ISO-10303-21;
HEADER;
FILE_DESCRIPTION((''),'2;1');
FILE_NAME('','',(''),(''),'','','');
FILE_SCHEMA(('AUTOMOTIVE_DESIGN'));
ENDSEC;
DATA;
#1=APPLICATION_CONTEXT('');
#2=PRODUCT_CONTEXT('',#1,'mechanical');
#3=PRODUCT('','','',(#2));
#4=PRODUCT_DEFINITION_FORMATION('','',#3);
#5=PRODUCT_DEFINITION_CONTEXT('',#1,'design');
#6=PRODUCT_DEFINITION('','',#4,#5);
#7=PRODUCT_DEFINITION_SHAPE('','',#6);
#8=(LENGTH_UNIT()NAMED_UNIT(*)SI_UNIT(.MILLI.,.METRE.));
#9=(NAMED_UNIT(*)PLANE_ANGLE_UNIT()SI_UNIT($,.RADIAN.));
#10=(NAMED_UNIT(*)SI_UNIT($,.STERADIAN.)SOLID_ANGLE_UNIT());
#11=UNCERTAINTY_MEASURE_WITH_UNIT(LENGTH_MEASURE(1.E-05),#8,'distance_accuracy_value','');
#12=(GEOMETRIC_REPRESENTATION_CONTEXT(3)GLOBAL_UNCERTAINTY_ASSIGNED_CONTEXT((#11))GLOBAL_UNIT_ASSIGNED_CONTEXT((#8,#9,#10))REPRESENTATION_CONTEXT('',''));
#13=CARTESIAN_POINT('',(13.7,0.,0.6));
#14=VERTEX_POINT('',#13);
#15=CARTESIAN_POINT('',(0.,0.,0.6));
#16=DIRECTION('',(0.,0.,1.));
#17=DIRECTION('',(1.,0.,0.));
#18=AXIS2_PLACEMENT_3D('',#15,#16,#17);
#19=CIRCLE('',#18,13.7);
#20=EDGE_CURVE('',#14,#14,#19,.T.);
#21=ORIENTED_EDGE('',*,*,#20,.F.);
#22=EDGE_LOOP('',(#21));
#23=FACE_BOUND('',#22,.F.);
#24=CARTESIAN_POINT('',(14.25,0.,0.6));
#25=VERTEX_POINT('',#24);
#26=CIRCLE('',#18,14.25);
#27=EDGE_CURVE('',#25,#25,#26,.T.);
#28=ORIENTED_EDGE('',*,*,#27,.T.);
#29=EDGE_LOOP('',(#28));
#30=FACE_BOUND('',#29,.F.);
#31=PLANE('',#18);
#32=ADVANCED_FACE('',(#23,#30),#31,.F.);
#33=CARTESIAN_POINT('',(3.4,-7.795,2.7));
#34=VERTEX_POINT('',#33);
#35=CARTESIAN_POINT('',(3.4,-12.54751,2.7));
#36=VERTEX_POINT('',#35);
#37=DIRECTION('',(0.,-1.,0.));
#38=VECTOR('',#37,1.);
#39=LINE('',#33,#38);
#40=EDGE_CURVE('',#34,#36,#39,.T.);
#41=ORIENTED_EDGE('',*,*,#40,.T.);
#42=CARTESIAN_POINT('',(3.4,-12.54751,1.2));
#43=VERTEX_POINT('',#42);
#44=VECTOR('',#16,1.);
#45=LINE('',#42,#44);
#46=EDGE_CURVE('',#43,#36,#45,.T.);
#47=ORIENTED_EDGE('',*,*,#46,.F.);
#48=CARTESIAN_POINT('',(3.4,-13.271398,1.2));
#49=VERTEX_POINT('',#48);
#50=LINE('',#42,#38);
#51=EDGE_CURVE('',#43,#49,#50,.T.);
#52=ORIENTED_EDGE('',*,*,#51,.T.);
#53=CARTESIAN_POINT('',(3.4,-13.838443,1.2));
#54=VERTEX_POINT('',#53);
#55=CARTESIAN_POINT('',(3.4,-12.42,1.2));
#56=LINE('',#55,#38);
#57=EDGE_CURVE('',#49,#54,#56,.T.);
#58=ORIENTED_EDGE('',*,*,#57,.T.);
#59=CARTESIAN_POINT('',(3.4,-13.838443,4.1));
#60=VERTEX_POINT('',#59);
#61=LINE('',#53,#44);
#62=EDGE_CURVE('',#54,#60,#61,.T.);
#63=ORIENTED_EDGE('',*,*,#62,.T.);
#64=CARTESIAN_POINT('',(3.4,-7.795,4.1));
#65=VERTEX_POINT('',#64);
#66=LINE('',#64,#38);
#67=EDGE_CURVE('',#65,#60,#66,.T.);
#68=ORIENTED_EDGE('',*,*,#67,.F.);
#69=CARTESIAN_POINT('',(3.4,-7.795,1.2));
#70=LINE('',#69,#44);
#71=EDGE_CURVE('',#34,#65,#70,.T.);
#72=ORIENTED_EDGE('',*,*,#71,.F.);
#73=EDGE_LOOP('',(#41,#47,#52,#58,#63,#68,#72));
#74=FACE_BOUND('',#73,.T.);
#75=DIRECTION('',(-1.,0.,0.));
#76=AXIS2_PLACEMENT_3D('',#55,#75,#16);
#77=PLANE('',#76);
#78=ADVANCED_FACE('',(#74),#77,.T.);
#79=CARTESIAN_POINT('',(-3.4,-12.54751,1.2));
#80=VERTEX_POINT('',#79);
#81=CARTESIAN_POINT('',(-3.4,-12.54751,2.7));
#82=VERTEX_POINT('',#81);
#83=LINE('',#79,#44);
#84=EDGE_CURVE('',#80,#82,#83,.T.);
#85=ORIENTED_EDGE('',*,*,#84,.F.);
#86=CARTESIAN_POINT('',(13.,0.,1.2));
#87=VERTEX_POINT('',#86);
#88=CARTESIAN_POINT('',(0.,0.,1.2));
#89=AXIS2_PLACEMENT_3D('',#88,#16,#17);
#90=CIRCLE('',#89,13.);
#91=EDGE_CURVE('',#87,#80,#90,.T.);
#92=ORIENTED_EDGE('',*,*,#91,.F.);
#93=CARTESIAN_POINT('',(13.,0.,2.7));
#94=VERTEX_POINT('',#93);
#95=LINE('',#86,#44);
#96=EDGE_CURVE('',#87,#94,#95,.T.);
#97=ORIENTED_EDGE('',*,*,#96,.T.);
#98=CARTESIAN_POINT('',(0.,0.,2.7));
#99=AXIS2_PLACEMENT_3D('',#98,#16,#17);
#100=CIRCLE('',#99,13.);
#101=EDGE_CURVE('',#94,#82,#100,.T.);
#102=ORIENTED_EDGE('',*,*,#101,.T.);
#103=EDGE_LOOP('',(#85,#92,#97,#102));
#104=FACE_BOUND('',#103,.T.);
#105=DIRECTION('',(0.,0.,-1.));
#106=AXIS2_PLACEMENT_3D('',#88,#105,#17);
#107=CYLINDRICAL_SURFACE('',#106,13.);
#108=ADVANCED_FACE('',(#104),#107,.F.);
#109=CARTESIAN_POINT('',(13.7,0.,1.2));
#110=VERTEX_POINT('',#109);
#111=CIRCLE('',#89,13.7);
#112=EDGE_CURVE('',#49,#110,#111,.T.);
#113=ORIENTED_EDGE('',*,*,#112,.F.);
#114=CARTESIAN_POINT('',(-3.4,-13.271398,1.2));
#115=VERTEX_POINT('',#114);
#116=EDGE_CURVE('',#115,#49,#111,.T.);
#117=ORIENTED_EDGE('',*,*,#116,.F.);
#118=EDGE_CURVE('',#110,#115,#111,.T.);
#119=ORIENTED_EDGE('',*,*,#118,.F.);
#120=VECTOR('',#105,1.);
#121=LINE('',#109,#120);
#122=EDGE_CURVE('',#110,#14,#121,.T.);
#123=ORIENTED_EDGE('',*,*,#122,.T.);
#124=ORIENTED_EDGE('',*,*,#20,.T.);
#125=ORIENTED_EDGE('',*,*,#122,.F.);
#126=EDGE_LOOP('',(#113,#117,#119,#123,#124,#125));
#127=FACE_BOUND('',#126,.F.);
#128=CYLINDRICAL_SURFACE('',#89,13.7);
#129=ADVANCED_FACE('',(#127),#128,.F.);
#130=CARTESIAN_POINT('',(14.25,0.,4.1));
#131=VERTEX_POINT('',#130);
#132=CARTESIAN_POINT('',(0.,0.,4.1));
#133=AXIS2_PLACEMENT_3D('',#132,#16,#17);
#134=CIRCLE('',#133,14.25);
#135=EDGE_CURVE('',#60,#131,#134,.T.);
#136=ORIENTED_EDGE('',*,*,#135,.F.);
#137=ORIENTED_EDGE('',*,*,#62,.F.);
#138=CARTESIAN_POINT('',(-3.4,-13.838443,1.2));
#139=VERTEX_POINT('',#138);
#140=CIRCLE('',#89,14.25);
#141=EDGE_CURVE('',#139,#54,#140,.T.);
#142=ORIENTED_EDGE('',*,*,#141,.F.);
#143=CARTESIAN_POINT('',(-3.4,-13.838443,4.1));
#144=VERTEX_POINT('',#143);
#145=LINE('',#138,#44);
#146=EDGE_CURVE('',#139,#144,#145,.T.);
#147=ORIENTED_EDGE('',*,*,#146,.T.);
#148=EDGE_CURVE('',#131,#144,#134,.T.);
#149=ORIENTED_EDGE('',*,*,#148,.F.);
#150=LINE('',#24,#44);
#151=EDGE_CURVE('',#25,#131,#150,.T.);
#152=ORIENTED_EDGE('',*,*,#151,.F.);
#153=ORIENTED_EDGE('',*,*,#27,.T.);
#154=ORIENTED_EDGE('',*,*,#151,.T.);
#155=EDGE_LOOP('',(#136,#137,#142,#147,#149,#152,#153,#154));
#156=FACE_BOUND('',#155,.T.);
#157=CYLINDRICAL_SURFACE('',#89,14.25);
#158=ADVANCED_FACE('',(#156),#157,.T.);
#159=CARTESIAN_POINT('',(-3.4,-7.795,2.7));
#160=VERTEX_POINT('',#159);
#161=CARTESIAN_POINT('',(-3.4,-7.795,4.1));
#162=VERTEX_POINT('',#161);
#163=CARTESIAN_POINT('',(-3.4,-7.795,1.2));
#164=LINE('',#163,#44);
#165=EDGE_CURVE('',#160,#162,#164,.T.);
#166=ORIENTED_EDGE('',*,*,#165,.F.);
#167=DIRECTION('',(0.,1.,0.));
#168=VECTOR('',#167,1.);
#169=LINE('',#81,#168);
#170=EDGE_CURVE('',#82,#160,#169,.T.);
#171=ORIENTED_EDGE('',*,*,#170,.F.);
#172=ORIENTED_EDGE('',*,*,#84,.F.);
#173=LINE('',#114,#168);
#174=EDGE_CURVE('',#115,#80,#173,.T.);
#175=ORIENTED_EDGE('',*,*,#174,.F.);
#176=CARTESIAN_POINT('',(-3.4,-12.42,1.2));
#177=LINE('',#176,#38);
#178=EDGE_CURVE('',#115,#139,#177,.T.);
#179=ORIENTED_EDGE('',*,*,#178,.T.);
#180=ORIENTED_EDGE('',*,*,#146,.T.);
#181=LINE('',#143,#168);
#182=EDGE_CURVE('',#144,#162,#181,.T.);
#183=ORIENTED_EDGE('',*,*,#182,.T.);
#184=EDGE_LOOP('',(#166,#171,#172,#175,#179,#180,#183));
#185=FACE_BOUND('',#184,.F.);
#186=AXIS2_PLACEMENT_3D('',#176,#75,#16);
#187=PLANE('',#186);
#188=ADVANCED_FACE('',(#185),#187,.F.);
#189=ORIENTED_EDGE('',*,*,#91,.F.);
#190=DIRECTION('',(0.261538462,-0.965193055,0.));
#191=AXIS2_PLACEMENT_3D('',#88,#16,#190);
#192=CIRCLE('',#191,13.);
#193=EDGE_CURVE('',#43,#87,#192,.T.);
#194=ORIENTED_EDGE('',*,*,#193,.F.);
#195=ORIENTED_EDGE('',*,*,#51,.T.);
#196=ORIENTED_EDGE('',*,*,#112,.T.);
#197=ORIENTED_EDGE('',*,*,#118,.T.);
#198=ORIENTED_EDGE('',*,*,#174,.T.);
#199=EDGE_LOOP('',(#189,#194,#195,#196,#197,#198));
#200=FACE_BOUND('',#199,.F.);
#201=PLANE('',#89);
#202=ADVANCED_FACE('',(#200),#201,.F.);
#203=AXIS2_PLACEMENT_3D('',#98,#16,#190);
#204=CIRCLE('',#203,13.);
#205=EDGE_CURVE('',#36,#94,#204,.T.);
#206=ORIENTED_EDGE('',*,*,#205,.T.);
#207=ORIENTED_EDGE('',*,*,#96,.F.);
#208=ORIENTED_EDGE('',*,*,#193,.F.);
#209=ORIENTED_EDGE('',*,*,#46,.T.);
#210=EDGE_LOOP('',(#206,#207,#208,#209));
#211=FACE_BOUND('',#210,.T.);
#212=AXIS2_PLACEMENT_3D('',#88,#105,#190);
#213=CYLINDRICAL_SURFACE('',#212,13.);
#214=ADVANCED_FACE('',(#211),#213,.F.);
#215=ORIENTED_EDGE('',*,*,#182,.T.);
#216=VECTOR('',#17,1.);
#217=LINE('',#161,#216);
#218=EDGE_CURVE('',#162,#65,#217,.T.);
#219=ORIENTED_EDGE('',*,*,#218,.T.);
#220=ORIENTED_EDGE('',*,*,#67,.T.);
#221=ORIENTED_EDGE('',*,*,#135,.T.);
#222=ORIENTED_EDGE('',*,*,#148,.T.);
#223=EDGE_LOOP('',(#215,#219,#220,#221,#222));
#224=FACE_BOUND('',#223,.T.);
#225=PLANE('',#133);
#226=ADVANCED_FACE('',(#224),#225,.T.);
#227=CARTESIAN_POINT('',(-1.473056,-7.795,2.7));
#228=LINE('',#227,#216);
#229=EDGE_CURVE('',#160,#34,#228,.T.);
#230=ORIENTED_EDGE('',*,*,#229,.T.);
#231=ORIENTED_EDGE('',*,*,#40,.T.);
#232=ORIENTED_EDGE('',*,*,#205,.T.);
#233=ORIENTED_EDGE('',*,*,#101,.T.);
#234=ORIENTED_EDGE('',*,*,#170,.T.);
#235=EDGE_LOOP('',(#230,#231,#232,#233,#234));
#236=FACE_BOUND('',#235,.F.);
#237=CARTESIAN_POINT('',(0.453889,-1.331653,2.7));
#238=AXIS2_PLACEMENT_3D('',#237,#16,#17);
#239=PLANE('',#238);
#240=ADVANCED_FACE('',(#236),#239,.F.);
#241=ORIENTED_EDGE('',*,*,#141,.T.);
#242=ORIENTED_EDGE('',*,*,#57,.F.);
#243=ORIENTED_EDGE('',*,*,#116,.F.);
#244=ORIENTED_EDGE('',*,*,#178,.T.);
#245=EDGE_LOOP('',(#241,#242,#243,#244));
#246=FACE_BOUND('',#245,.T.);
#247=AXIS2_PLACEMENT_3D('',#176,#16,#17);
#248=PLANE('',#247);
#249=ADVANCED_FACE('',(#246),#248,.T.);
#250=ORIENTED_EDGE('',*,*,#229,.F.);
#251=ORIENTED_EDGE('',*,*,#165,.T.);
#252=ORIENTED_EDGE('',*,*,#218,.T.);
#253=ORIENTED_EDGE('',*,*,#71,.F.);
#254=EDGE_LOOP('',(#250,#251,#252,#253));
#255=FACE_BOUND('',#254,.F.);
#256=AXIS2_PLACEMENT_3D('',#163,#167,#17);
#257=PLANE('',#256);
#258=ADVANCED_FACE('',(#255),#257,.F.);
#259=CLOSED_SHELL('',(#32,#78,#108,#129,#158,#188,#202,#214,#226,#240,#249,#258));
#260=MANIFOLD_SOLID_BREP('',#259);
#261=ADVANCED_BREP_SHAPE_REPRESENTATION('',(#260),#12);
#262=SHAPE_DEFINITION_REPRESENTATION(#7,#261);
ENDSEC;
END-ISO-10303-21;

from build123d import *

# Parameters (mm, degrees)
F0_R     = 13.5
F0_W     = 6
F0_H     = 4.25
F1_DEPTH = 1.2
F2_DEPTH = 4.2
F3_R     = 14.25
F3_R_2   = 13.7
F3_R_3   = 13.5
F4_DEPTH = 2.9
F5_DEPTH = 0.6
F3_W     = 6
F3_H     = 4.25
F6_DEPTH = 1.5
F7_W     = 6.8
F7_H     = 3
F8_DEPTH = 8


with BuildPart() as f1:
    # F0 (on Top) → F1 (new body)
    with BuildSketch(Plane.XY):
        Circle(F0_R)
        with Locations((0, -10.295)):
            Rectangle(F0_W, F0_H, mode=Mode.SUBTRACT)
        with Locations((0, -10.295)):
            Rectangle(F0_W, F0_H)
    extrude(amount=F1_DEPTH)

    # F0 (on Top) → F2 (join)
    with BuildSketch(Plane.XY):
        with Locations((0, -10.295)):
            Rectangle(F0_W, F0_H)
    extrude(amount=F2_DEPTH)


with BuildPart() as f4:
    # F3 (on face) → F4 (new body)
    with BuildSketch(Plane.XY.offset(1.2)):
        Circle(F3_R)
        Circle(F3_R_2, mode=Mode.SUBTRACT)
        Circle(F3_R_2)
        Circle(F3_R_3, mode=Mode.SUBTRACT)
        Circle(F3_R_3)
        with BuildLine():
            Line((3.4, -12.5475097131), (3.4, -12.795))
            Line((3.4, -12.795), (2.2995597405, -12.795))
            ThreePointArc((2.2995597405, -12.795), (0, -13), (-2.2995597405, -12.795))
            Line((-2.2995597405, -12.795), (-3.4, -12.795))
            Line((-3.4, -12.795), (-3.4, -12.5475097131))
            ThreePointArc((-3.4, -12.5475097131), (-7.8993670633, 10.3247275993), (13, 0))
            ThreePointArc((13, 0), (10.3247275993, -7.8993670633), (3.4, -12.5475097131))
        make_face(mode=Mode.SUBTRACT)
        with BuildLine():
            Line((3.4, -7.795), (3.4, -12.5475097131))
            ThreePointArc((3.4, -12.5475097131), (10.3247275993, -7.8993670633), (13, 0))
            ThreePointArc((13, 0), (-7.8993670633, 10.3247275993), (-3.4, -12.5475097131))
            Line((-3.4, -12.5475097131), (-3.4, -7.795))
            Line((-3.4, -7.795), (3.4, -7.795))
        make_face()
        with BuildLine():
            ThreePointArc((-2.2995597405, -12.795), (0, -13), (2.2995597405, -12.795))
            Line((2.2995597405, -12.795), (-2.2995597405, -12.795))
        make_face()
    extrude(amount=F4_DEPTH)

    # F3 (on face) → F5 (join)
    with BuildSketch(Plane.XY.offset(1.2)):
        Circle(F3_R)
        Circle(F3_R_2, mode=Mode.SUBTRACT)
    extrude(amount=-F5_DEPTH)

    # F3 (on face) → F6 (cut)
    with BuildSketch(Plane.XY.offset(1.2)):
        with BuildLine():
            Line((3.4, -7.795), (3.4, -12.5475097131))
            ThreePointArc((3.4, -12.5475097131), (10.3247275993, -7.8993670633), (13, 0))
            ThreePointArc((13, 0), (-7.8993670633, 10.3247275993), (-3.4, -12.5475097131))
            Line((-3.4, -12.5475097131), (-3.4, -7.795))
            Line((-3.4, -7.795), (3.4, -7.795))
        make_face()
        with BuildLine():
            Line((-2.2995597405, -12.795), (2.2995597405, -12.795))
            ThreePointArc((2.2995597405, -12.795), (2.8524652793, -12.6831952532), (3.4, -12.5475097131))
            Line((3.4, -12.5475097131), (3.4, -7.795))
            Line((3.4, -7.795), (-3.4, -7.795))
            Line((-3.4, -7.795), (-3.4, -12.5475097131))
            ThreePointArc((-3.4, -12.5475097131), (-2.8524652793, -12.6831952532), (-2.2995597405, -12.795))
        make_face()
        with Locations((0, -10.295)):
            Rectangle(F3_W, F3_H, mode=Mode.SUBTRACT)
        with BuildLine():
            ThreePointArc((-2.2995597405, -12.795), (0, -13), (2.2995597405, -12.795))
            Line((2.2995597405, -12.795), (-2.2995597405, -12.795))
        make_face()
    extrude(amount=F6_DEPTH, mode=Mode.SUBTRACT)

    # F7 (on face) → F8 (cut)
    with BuildSketch(Plane.XZ.offset(12.42)):
        with Locations((0, 2.7)):
            Rectangle(F7_W, F7_H)
    extrude(amount=F8_DEPTH, mode=Mode.SUBTRACT)


solid = f4.part
